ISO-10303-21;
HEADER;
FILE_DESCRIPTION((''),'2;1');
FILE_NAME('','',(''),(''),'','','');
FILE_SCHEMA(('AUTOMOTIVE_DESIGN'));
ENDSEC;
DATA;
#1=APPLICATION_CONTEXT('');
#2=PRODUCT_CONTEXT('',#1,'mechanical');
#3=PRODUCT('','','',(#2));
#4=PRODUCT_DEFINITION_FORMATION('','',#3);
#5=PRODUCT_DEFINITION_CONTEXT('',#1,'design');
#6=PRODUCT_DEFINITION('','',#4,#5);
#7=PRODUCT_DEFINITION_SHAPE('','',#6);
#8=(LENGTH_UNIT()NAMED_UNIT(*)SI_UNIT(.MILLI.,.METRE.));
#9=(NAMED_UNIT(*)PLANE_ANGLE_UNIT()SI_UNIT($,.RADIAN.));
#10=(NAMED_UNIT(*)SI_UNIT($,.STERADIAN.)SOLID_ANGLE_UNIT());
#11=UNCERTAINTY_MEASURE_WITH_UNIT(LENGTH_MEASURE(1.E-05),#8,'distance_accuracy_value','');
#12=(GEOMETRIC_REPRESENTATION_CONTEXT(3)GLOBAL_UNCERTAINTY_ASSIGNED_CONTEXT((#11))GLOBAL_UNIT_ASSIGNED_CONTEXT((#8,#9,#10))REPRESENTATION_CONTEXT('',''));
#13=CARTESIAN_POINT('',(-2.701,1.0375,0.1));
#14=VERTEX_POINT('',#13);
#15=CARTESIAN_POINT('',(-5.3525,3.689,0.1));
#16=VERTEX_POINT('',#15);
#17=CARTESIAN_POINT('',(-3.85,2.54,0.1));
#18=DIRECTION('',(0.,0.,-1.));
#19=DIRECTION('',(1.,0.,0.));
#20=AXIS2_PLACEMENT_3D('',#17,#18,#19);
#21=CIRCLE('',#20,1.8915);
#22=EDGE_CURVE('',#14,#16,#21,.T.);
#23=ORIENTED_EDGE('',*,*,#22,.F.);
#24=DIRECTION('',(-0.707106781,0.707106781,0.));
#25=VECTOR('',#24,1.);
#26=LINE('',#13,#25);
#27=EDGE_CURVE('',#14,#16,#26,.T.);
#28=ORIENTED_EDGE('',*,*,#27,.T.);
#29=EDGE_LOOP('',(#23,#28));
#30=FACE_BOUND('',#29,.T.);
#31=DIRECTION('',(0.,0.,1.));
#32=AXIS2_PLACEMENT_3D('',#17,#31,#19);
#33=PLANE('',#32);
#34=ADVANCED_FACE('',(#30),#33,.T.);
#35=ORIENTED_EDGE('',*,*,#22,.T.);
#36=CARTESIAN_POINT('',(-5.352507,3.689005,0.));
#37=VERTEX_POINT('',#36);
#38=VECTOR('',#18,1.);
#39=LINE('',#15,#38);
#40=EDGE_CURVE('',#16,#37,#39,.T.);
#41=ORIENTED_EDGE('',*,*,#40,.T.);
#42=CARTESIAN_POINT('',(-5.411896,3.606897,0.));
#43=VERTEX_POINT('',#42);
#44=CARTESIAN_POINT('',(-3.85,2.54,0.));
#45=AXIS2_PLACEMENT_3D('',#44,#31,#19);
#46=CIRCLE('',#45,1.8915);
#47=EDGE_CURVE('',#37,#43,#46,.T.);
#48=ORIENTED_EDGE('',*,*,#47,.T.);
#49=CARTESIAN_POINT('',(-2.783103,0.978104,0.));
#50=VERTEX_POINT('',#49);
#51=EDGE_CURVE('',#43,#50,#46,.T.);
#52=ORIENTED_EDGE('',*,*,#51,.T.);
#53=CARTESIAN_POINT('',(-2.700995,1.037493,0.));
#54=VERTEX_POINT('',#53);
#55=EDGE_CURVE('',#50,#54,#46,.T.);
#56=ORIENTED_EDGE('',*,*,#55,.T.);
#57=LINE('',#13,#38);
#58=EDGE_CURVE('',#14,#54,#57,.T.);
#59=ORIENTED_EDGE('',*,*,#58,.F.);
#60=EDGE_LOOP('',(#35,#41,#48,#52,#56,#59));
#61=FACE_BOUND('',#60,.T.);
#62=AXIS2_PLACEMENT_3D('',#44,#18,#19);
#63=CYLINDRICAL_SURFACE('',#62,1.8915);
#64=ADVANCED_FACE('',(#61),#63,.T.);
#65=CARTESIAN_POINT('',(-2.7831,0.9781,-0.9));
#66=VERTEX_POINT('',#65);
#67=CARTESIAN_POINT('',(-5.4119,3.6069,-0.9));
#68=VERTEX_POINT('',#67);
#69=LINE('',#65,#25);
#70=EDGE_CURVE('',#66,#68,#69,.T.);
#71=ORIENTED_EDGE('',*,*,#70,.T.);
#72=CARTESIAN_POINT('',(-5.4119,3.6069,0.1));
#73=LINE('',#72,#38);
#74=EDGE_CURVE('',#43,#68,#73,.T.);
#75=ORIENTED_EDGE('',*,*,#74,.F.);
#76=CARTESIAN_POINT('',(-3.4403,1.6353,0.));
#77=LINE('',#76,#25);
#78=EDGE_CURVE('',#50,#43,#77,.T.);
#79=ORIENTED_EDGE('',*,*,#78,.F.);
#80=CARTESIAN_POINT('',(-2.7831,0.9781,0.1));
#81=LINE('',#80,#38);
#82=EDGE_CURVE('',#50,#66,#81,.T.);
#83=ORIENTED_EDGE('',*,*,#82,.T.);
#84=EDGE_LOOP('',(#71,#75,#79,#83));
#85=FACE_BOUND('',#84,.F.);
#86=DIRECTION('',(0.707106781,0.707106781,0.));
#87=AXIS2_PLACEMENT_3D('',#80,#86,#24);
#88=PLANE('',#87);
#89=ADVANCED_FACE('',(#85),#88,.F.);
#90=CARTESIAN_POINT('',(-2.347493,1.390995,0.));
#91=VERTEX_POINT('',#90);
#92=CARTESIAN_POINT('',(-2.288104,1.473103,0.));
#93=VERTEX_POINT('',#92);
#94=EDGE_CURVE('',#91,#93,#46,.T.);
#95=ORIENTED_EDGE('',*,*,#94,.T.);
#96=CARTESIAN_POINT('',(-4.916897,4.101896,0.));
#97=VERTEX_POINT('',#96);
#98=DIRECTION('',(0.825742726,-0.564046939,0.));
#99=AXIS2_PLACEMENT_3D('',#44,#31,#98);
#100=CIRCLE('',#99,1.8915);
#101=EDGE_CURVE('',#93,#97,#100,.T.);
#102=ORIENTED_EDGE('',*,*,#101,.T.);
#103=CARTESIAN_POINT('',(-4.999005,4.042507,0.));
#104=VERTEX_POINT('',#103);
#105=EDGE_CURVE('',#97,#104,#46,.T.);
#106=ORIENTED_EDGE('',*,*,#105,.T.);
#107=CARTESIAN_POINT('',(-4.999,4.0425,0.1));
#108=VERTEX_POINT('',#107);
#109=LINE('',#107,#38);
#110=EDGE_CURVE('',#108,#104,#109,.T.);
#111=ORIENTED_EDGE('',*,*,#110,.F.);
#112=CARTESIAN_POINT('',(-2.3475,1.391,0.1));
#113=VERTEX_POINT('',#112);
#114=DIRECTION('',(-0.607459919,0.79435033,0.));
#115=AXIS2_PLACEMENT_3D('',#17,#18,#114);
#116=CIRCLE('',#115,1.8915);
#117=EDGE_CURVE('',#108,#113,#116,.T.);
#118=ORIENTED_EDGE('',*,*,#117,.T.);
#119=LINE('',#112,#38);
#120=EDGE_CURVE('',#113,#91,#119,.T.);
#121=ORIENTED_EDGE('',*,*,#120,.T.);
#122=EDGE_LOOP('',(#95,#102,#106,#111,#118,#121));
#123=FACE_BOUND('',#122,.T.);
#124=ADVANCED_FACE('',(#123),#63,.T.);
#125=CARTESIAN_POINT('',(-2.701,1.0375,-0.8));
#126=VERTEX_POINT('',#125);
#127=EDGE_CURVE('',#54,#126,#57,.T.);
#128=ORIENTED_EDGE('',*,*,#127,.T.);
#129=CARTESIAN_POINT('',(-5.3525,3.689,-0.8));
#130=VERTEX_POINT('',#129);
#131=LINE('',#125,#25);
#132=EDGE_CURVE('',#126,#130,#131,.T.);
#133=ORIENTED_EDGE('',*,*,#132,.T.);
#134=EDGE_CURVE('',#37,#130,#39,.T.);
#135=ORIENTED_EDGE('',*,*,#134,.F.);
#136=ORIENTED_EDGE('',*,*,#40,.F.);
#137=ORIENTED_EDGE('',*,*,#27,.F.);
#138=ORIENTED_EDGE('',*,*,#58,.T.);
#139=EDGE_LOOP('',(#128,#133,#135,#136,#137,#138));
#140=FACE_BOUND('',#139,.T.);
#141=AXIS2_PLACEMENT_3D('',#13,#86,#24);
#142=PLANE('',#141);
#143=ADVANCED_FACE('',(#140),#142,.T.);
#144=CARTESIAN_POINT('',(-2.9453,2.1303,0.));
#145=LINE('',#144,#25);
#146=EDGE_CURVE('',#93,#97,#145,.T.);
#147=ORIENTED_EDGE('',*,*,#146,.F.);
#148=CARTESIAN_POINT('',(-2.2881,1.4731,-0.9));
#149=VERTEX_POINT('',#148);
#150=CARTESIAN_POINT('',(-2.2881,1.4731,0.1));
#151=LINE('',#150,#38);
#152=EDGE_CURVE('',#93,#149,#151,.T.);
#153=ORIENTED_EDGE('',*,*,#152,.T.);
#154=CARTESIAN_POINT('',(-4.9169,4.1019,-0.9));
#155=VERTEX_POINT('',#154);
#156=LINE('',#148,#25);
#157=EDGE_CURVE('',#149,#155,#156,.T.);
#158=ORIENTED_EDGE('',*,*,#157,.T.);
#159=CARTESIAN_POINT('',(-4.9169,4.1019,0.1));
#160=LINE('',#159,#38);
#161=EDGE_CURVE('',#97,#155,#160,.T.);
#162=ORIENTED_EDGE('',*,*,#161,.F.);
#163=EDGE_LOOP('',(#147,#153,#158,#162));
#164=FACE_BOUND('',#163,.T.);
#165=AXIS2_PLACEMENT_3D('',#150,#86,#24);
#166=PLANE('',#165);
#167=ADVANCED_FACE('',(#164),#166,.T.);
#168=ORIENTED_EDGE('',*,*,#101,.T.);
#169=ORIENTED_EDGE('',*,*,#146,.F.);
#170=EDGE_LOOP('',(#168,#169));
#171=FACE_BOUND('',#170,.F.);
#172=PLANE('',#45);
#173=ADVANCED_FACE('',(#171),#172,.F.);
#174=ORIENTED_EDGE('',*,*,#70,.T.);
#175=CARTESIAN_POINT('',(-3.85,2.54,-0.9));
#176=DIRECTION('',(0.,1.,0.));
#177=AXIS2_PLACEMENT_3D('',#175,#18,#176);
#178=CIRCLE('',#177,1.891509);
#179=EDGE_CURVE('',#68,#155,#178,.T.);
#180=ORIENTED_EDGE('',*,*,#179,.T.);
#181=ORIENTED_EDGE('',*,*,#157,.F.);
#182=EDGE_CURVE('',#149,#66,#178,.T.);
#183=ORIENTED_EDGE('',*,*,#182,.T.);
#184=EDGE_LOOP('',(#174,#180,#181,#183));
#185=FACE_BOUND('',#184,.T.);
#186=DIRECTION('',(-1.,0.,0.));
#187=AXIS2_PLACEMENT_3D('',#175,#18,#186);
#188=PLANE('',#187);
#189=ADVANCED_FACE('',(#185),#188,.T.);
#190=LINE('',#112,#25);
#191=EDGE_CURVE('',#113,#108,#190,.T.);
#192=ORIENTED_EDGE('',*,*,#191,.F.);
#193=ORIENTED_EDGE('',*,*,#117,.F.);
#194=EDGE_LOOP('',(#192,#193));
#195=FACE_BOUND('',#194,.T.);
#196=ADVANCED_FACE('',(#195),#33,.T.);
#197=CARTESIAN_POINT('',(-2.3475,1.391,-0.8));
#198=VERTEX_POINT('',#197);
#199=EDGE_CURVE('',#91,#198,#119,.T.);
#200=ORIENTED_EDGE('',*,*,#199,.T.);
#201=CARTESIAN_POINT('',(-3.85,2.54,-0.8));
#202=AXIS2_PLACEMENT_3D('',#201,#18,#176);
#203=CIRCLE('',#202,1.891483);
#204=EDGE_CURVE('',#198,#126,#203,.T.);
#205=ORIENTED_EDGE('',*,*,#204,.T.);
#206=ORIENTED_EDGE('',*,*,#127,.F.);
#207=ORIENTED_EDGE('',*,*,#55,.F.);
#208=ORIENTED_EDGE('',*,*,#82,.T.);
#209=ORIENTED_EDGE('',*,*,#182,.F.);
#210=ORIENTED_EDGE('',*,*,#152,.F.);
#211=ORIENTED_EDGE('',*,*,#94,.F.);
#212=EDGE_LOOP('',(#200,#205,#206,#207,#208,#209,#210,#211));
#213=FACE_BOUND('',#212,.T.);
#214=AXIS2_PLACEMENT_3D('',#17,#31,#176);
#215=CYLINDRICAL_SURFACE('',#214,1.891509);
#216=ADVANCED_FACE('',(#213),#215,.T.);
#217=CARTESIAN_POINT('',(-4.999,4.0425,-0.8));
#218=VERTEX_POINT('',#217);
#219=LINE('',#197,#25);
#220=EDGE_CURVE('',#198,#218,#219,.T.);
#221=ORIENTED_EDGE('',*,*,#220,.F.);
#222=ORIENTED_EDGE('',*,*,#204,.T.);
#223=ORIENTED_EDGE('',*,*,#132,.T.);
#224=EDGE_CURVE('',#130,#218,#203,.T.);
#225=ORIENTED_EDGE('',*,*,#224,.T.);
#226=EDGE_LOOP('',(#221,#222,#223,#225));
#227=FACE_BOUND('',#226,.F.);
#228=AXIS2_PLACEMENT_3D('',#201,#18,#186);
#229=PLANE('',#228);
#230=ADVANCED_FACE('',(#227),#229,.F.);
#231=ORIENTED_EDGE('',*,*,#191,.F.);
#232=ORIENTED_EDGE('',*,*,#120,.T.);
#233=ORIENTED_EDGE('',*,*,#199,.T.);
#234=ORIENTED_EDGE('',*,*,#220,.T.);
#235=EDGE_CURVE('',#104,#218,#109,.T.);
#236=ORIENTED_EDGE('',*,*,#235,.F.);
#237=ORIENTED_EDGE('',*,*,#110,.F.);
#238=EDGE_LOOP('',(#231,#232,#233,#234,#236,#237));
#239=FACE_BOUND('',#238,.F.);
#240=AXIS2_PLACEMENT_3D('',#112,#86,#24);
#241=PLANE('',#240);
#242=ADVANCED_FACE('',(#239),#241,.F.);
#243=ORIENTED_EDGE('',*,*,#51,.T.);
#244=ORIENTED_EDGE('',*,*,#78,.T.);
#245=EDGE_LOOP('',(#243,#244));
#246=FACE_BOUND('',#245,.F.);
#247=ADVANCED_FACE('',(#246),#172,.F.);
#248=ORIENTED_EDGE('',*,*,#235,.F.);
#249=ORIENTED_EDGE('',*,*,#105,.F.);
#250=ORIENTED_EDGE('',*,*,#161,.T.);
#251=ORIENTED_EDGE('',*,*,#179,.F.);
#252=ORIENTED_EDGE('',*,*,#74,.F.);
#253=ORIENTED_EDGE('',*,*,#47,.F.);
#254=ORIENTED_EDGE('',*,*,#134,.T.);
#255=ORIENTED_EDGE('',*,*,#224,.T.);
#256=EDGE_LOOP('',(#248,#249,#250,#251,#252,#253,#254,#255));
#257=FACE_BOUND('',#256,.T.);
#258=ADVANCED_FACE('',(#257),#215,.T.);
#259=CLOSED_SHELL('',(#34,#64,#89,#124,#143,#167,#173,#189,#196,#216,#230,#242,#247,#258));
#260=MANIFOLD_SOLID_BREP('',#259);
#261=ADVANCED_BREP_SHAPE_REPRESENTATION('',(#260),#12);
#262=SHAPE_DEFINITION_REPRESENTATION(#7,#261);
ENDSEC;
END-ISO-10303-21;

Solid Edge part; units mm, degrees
sketch "Sketch1" plane through (0, 0, 0) normal (0, 0, 1) x (1, 0, 0)
  circle A0 centre (-3.85, 2.54) radius 1.8915
extrude "Protrusion1" add sketch "Sketch1" along normal blind 0.1
sketch "Sketch2" plane through (-3.85, 2.54, 0.1) normal (0, 0, 1) x (0, 1, 0)
  line L0 (-1.5619, -1.0669) -> (1.0669, 1.5619)
  arc A0 (1.0669, 1.5619) -> (1.5619, 1.0669) centre (0, 0) cw
  line L1 (-1.0669, -1.5619) -> (1.5619, 1.0669)
  arc A1 (-1.0669, -1.5619) -> (-1.5619, -1.0669) centre (0, 0) cw
extrude "Ausprägung_2" add sketch "Sketch2" against normal blind 1
sketch "Sketch3" plane through (-3.85, 2.54, 0.1) normal (0, 0, 1) x (0, 1, 0)
  line L0 (-1.5025, -1.149) -> (1.149, 1.5025)
  line L1 (-1.149, -1.5025) -> (1.5025, 1.149)
  arc A0 (-1.149, -1.5025) -> (-1.5025, -1.149) centre (0, 0) cw
  arc A1 (1.149, 1.5025) -> (1.5025, 1.149) centre (0, 0) cw
extrude "Ausschnitt_1" cut sketch "Sketch3" against normal blind 0.9
